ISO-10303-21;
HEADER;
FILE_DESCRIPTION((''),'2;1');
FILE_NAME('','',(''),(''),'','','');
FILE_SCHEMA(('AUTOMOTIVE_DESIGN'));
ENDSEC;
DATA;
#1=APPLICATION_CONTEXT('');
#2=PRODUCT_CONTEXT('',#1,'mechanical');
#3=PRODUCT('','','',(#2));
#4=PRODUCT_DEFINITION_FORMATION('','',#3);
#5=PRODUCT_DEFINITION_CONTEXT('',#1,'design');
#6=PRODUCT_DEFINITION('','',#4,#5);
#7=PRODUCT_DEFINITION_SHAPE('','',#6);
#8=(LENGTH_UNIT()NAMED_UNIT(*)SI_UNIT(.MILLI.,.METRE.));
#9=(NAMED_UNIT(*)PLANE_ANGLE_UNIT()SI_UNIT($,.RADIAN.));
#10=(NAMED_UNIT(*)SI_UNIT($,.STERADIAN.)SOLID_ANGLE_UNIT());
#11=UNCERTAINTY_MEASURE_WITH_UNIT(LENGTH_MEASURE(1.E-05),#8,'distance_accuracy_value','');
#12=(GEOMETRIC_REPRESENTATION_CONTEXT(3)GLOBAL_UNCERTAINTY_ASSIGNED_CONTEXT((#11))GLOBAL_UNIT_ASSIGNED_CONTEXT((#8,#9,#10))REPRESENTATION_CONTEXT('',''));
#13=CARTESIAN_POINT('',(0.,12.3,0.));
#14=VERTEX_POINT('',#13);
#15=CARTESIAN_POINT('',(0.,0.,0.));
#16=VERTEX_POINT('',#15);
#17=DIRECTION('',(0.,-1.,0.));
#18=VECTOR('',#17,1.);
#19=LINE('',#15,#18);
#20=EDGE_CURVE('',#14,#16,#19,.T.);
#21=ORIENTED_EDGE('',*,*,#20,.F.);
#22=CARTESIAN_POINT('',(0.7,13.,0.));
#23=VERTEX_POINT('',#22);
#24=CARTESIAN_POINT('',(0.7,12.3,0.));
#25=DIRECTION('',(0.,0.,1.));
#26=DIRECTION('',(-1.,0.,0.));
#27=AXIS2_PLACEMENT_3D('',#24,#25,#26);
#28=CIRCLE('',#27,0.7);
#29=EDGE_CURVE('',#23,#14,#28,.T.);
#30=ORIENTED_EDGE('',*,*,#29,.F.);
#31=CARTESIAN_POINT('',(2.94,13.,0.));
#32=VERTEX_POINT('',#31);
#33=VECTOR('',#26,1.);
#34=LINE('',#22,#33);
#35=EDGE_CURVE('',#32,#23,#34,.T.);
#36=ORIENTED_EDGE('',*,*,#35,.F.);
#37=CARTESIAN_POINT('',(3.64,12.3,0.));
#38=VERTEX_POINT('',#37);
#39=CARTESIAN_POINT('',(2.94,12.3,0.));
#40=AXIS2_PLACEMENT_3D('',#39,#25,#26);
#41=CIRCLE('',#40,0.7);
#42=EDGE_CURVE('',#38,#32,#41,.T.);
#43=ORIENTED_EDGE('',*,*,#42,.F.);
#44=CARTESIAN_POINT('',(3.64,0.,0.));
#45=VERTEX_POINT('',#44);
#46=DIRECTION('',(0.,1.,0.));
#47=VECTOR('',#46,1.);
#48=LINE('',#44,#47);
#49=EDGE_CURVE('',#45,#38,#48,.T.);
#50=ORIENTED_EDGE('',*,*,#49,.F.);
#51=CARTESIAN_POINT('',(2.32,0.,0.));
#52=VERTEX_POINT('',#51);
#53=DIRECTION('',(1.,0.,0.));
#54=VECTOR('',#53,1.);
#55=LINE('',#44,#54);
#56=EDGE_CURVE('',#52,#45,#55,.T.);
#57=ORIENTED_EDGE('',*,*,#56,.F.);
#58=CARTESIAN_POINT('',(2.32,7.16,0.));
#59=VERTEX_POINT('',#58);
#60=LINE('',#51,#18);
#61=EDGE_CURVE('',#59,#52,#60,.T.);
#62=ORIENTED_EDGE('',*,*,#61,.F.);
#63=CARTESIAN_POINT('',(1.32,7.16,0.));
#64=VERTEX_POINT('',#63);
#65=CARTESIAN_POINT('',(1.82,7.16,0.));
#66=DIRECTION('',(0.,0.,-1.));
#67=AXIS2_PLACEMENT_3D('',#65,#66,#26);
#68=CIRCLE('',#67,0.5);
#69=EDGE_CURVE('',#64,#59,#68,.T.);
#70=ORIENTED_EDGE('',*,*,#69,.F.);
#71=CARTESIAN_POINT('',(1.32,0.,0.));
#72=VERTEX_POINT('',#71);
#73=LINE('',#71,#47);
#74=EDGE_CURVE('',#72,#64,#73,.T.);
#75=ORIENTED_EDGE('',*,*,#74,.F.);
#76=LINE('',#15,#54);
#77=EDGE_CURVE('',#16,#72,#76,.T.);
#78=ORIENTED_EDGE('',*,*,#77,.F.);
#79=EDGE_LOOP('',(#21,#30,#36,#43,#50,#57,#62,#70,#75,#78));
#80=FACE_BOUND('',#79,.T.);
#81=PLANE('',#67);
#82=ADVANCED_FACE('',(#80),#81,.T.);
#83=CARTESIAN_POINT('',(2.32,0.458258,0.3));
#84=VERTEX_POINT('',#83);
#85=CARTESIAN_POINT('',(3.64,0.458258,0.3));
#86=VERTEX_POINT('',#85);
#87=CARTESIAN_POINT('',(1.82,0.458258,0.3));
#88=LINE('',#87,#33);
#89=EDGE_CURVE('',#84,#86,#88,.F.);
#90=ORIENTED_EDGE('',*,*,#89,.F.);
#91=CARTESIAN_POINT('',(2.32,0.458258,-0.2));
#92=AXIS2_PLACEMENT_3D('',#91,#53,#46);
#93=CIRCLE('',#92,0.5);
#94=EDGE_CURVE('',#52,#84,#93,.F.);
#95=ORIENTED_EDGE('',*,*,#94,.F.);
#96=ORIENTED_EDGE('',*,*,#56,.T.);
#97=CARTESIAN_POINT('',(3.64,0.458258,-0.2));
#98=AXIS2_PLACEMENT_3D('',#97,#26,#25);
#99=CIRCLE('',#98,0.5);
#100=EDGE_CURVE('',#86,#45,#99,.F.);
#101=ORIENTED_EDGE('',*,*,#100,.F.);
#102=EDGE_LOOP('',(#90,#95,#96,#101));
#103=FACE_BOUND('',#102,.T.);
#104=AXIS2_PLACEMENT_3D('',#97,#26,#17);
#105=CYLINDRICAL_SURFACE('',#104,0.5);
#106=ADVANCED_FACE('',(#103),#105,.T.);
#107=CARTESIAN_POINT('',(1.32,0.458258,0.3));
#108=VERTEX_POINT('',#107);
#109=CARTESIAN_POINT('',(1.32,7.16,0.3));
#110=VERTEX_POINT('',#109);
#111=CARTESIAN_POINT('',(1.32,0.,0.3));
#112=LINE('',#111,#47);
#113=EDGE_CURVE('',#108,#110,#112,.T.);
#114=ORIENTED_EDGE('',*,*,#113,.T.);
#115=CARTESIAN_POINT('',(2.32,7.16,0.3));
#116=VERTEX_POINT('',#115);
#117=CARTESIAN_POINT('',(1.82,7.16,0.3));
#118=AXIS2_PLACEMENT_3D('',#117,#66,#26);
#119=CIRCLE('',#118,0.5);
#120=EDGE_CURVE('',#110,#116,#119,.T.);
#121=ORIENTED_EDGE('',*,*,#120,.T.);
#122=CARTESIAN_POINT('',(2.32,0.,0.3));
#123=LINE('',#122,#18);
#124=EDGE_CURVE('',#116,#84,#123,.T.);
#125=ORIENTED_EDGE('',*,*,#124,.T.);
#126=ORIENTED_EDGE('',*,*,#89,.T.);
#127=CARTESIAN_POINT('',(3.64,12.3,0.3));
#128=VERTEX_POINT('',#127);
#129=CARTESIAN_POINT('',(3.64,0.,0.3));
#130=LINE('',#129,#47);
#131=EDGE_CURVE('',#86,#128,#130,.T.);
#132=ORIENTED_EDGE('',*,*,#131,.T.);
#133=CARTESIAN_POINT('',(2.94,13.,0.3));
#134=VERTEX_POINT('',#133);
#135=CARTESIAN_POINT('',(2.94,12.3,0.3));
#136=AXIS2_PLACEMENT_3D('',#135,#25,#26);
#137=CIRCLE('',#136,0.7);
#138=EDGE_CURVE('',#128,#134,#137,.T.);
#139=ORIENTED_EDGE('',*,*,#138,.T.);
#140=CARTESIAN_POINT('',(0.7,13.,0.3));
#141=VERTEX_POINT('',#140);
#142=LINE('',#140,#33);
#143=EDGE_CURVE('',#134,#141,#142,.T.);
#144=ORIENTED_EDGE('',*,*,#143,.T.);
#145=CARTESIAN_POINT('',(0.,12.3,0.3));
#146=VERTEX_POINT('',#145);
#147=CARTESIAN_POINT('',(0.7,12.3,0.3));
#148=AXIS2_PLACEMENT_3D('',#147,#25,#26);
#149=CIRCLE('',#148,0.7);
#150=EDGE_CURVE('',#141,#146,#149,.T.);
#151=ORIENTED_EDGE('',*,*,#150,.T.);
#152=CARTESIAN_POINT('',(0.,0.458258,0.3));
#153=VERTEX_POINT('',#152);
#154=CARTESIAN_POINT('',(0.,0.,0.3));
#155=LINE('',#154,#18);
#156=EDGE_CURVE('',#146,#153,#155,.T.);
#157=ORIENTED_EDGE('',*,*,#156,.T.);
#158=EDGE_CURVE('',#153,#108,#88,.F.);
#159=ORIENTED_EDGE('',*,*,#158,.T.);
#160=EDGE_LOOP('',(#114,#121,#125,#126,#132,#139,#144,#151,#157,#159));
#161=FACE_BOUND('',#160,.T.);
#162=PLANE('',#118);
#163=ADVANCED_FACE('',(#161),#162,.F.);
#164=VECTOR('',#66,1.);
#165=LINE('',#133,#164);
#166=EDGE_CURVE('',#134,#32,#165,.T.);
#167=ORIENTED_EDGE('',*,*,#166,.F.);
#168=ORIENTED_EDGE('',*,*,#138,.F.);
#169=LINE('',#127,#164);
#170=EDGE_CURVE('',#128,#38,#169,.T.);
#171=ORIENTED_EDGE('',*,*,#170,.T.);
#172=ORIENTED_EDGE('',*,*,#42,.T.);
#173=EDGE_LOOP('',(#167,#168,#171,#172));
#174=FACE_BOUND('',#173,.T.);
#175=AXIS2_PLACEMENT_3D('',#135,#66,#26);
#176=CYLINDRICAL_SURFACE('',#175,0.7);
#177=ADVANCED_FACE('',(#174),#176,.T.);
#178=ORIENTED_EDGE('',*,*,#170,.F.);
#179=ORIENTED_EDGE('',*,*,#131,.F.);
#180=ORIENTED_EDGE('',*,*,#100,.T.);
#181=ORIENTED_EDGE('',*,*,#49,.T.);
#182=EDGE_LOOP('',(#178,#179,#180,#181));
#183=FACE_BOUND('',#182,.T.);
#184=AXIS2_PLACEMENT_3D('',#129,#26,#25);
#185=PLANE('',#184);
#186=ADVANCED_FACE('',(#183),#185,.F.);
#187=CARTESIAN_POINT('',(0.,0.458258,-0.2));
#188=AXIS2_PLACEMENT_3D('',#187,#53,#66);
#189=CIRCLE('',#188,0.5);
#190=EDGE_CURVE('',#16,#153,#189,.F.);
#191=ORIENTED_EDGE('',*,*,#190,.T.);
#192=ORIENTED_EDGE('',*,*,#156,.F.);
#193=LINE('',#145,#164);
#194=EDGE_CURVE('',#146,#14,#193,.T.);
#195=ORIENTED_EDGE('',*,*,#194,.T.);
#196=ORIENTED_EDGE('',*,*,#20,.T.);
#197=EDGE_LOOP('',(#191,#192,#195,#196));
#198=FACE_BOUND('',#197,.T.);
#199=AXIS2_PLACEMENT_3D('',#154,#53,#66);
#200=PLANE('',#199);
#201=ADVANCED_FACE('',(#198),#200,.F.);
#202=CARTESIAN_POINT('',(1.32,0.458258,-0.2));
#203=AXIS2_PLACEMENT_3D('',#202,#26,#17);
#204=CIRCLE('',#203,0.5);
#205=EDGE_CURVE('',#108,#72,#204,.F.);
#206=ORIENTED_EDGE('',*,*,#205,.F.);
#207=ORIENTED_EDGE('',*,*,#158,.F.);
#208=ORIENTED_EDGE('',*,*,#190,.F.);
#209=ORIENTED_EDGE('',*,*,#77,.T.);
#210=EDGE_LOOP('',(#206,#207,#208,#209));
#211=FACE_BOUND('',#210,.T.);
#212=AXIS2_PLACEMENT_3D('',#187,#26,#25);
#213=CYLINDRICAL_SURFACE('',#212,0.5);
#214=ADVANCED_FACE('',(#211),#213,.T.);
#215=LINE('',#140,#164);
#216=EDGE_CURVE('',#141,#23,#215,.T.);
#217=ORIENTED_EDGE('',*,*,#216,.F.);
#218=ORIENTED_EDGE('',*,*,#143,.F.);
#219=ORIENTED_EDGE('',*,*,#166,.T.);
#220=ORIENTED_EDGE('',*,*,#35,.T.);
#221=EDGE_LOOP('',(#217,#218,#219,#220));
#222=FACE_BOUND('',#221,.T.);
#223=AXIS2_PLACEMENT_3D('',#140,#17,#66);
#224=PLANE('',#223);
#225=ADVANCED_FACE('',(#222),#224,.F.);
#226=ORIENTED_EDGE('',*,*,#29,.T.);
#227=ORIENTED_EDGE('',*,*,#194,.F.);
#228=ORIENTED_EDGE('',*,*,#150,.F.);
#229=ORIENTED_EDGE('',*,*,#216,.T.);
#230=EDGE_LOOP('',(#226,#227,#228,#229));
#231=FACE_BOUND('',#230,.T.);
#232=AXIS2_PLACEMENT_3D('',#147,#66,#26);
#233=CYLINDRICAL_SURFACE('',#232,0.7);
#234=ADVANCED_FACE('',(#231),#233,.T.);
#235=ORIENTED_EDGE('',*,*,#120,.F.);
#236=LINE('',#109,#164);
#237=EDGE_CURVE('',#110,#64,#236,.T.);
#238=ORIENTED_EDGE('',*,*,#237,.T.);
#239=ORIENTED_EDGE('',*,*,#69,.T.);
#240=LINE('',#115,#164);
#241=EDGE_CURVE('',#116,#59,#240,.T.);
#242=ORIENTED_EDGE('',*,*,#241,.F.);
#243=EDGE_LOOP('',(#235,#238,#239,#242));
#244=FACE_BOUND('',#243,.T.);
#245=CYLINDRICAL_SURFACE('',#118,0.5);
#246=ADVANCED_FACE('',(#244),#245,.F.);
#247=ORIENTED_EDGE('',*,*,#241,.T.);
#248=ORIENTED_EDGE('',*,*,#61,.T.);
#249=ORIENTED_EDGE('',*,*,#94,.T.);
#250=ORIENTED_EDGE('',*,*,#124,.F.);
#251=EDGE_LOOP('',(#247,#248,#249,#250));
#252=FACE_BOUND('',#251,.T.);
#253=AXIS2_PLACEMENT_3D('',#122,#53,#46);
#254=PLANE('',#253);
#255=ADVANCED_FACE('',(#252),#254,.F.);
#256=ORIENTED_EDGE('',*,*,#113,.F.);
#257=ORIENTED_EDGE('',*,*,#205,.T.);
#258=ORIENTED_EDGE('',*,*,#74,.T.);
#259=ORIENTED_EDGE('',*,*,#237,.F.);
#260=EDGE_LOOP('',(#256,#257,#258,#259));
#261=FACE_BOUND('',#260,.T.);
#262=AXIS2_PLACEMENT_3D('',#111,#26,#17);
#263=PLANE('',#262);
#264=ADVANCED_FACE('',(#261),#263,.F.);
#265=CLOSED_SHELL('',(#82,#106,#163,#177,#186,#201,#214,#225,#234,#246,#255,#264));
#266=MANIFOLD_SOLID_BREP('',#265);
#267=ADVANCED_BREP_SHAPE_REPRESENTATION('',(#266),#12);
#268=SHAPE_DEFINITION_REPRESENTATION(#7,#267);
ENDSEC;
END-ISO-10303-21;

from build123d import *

# Parameters (mm, degrees)
EXTRUDE_1_DEPTH = 0.3
FILLET_1_R      = 0.5


with BuildPart() as part:
    # 草图1 → 凸台-拉伸1 (new body)
    with BuildSketch(Plane.XY):
        with BuildLine():
            Line((0, 0), (0, 12.3))
            ThreePointArc((0, 12.3), (0.205025253, 12.794974747), (0.7, 13))
            Line((0.7, 13), (2.94, 13))
            ThreePointArc((2.94, 13), (3.434974747, 12.794974747), (3.64, 12.3))
            Line((3.64, 12.3), (3.64, 0))
            Line((3.64, 0), (2.32, 0))
            Line((2.32, 0), (2.32, 7.16))
            ThreePointArc((2.32, 7.16), (1.82, 7.66), (1.32, 7.16))
            Line((1.32, 7.16), (1.32, 0))
            Line((1.32, 0), (0, 0))
        make_face()
    extrude(amount=EXTRUDE_1_DEPTH)

    # 圆角1
    # the kernel refuses this fillet: 0.5 mm, written as the material it takes off along each edge
    with BuildSketch(Plane(origin=(2.465643924, 0, 0.3), x_dir=(0, 0, -1), z_dir=(-1, 0, 0)), Plane(origin=(4.785643924, 0, 0.3), x_dir=(0, 0, -1), z_dir=(-1, 0, 0))) as fillet_1_piece_1:
        with BuildLine():
            CenterArc((0.5, -0.458257569), FILLET_1_R, 113.578178478, 66.421821522)
            Line((0, -0.458257569), (-0.01, -0.458257569))
            Line((-0.01, -0.458257569), (-0.01, 0))
            Line((-0.01, 0), (0, 0.01))
            ThreePointArc((0, 0.01), (0.15, 0.01), (0.296, 0.009165151))
            Line((0.296, 0.009165151), (0.3, 0))
        make_face()
    extrude(amount=3.611287847, mode=Mode.SUBTRACT)


solid = part.part
